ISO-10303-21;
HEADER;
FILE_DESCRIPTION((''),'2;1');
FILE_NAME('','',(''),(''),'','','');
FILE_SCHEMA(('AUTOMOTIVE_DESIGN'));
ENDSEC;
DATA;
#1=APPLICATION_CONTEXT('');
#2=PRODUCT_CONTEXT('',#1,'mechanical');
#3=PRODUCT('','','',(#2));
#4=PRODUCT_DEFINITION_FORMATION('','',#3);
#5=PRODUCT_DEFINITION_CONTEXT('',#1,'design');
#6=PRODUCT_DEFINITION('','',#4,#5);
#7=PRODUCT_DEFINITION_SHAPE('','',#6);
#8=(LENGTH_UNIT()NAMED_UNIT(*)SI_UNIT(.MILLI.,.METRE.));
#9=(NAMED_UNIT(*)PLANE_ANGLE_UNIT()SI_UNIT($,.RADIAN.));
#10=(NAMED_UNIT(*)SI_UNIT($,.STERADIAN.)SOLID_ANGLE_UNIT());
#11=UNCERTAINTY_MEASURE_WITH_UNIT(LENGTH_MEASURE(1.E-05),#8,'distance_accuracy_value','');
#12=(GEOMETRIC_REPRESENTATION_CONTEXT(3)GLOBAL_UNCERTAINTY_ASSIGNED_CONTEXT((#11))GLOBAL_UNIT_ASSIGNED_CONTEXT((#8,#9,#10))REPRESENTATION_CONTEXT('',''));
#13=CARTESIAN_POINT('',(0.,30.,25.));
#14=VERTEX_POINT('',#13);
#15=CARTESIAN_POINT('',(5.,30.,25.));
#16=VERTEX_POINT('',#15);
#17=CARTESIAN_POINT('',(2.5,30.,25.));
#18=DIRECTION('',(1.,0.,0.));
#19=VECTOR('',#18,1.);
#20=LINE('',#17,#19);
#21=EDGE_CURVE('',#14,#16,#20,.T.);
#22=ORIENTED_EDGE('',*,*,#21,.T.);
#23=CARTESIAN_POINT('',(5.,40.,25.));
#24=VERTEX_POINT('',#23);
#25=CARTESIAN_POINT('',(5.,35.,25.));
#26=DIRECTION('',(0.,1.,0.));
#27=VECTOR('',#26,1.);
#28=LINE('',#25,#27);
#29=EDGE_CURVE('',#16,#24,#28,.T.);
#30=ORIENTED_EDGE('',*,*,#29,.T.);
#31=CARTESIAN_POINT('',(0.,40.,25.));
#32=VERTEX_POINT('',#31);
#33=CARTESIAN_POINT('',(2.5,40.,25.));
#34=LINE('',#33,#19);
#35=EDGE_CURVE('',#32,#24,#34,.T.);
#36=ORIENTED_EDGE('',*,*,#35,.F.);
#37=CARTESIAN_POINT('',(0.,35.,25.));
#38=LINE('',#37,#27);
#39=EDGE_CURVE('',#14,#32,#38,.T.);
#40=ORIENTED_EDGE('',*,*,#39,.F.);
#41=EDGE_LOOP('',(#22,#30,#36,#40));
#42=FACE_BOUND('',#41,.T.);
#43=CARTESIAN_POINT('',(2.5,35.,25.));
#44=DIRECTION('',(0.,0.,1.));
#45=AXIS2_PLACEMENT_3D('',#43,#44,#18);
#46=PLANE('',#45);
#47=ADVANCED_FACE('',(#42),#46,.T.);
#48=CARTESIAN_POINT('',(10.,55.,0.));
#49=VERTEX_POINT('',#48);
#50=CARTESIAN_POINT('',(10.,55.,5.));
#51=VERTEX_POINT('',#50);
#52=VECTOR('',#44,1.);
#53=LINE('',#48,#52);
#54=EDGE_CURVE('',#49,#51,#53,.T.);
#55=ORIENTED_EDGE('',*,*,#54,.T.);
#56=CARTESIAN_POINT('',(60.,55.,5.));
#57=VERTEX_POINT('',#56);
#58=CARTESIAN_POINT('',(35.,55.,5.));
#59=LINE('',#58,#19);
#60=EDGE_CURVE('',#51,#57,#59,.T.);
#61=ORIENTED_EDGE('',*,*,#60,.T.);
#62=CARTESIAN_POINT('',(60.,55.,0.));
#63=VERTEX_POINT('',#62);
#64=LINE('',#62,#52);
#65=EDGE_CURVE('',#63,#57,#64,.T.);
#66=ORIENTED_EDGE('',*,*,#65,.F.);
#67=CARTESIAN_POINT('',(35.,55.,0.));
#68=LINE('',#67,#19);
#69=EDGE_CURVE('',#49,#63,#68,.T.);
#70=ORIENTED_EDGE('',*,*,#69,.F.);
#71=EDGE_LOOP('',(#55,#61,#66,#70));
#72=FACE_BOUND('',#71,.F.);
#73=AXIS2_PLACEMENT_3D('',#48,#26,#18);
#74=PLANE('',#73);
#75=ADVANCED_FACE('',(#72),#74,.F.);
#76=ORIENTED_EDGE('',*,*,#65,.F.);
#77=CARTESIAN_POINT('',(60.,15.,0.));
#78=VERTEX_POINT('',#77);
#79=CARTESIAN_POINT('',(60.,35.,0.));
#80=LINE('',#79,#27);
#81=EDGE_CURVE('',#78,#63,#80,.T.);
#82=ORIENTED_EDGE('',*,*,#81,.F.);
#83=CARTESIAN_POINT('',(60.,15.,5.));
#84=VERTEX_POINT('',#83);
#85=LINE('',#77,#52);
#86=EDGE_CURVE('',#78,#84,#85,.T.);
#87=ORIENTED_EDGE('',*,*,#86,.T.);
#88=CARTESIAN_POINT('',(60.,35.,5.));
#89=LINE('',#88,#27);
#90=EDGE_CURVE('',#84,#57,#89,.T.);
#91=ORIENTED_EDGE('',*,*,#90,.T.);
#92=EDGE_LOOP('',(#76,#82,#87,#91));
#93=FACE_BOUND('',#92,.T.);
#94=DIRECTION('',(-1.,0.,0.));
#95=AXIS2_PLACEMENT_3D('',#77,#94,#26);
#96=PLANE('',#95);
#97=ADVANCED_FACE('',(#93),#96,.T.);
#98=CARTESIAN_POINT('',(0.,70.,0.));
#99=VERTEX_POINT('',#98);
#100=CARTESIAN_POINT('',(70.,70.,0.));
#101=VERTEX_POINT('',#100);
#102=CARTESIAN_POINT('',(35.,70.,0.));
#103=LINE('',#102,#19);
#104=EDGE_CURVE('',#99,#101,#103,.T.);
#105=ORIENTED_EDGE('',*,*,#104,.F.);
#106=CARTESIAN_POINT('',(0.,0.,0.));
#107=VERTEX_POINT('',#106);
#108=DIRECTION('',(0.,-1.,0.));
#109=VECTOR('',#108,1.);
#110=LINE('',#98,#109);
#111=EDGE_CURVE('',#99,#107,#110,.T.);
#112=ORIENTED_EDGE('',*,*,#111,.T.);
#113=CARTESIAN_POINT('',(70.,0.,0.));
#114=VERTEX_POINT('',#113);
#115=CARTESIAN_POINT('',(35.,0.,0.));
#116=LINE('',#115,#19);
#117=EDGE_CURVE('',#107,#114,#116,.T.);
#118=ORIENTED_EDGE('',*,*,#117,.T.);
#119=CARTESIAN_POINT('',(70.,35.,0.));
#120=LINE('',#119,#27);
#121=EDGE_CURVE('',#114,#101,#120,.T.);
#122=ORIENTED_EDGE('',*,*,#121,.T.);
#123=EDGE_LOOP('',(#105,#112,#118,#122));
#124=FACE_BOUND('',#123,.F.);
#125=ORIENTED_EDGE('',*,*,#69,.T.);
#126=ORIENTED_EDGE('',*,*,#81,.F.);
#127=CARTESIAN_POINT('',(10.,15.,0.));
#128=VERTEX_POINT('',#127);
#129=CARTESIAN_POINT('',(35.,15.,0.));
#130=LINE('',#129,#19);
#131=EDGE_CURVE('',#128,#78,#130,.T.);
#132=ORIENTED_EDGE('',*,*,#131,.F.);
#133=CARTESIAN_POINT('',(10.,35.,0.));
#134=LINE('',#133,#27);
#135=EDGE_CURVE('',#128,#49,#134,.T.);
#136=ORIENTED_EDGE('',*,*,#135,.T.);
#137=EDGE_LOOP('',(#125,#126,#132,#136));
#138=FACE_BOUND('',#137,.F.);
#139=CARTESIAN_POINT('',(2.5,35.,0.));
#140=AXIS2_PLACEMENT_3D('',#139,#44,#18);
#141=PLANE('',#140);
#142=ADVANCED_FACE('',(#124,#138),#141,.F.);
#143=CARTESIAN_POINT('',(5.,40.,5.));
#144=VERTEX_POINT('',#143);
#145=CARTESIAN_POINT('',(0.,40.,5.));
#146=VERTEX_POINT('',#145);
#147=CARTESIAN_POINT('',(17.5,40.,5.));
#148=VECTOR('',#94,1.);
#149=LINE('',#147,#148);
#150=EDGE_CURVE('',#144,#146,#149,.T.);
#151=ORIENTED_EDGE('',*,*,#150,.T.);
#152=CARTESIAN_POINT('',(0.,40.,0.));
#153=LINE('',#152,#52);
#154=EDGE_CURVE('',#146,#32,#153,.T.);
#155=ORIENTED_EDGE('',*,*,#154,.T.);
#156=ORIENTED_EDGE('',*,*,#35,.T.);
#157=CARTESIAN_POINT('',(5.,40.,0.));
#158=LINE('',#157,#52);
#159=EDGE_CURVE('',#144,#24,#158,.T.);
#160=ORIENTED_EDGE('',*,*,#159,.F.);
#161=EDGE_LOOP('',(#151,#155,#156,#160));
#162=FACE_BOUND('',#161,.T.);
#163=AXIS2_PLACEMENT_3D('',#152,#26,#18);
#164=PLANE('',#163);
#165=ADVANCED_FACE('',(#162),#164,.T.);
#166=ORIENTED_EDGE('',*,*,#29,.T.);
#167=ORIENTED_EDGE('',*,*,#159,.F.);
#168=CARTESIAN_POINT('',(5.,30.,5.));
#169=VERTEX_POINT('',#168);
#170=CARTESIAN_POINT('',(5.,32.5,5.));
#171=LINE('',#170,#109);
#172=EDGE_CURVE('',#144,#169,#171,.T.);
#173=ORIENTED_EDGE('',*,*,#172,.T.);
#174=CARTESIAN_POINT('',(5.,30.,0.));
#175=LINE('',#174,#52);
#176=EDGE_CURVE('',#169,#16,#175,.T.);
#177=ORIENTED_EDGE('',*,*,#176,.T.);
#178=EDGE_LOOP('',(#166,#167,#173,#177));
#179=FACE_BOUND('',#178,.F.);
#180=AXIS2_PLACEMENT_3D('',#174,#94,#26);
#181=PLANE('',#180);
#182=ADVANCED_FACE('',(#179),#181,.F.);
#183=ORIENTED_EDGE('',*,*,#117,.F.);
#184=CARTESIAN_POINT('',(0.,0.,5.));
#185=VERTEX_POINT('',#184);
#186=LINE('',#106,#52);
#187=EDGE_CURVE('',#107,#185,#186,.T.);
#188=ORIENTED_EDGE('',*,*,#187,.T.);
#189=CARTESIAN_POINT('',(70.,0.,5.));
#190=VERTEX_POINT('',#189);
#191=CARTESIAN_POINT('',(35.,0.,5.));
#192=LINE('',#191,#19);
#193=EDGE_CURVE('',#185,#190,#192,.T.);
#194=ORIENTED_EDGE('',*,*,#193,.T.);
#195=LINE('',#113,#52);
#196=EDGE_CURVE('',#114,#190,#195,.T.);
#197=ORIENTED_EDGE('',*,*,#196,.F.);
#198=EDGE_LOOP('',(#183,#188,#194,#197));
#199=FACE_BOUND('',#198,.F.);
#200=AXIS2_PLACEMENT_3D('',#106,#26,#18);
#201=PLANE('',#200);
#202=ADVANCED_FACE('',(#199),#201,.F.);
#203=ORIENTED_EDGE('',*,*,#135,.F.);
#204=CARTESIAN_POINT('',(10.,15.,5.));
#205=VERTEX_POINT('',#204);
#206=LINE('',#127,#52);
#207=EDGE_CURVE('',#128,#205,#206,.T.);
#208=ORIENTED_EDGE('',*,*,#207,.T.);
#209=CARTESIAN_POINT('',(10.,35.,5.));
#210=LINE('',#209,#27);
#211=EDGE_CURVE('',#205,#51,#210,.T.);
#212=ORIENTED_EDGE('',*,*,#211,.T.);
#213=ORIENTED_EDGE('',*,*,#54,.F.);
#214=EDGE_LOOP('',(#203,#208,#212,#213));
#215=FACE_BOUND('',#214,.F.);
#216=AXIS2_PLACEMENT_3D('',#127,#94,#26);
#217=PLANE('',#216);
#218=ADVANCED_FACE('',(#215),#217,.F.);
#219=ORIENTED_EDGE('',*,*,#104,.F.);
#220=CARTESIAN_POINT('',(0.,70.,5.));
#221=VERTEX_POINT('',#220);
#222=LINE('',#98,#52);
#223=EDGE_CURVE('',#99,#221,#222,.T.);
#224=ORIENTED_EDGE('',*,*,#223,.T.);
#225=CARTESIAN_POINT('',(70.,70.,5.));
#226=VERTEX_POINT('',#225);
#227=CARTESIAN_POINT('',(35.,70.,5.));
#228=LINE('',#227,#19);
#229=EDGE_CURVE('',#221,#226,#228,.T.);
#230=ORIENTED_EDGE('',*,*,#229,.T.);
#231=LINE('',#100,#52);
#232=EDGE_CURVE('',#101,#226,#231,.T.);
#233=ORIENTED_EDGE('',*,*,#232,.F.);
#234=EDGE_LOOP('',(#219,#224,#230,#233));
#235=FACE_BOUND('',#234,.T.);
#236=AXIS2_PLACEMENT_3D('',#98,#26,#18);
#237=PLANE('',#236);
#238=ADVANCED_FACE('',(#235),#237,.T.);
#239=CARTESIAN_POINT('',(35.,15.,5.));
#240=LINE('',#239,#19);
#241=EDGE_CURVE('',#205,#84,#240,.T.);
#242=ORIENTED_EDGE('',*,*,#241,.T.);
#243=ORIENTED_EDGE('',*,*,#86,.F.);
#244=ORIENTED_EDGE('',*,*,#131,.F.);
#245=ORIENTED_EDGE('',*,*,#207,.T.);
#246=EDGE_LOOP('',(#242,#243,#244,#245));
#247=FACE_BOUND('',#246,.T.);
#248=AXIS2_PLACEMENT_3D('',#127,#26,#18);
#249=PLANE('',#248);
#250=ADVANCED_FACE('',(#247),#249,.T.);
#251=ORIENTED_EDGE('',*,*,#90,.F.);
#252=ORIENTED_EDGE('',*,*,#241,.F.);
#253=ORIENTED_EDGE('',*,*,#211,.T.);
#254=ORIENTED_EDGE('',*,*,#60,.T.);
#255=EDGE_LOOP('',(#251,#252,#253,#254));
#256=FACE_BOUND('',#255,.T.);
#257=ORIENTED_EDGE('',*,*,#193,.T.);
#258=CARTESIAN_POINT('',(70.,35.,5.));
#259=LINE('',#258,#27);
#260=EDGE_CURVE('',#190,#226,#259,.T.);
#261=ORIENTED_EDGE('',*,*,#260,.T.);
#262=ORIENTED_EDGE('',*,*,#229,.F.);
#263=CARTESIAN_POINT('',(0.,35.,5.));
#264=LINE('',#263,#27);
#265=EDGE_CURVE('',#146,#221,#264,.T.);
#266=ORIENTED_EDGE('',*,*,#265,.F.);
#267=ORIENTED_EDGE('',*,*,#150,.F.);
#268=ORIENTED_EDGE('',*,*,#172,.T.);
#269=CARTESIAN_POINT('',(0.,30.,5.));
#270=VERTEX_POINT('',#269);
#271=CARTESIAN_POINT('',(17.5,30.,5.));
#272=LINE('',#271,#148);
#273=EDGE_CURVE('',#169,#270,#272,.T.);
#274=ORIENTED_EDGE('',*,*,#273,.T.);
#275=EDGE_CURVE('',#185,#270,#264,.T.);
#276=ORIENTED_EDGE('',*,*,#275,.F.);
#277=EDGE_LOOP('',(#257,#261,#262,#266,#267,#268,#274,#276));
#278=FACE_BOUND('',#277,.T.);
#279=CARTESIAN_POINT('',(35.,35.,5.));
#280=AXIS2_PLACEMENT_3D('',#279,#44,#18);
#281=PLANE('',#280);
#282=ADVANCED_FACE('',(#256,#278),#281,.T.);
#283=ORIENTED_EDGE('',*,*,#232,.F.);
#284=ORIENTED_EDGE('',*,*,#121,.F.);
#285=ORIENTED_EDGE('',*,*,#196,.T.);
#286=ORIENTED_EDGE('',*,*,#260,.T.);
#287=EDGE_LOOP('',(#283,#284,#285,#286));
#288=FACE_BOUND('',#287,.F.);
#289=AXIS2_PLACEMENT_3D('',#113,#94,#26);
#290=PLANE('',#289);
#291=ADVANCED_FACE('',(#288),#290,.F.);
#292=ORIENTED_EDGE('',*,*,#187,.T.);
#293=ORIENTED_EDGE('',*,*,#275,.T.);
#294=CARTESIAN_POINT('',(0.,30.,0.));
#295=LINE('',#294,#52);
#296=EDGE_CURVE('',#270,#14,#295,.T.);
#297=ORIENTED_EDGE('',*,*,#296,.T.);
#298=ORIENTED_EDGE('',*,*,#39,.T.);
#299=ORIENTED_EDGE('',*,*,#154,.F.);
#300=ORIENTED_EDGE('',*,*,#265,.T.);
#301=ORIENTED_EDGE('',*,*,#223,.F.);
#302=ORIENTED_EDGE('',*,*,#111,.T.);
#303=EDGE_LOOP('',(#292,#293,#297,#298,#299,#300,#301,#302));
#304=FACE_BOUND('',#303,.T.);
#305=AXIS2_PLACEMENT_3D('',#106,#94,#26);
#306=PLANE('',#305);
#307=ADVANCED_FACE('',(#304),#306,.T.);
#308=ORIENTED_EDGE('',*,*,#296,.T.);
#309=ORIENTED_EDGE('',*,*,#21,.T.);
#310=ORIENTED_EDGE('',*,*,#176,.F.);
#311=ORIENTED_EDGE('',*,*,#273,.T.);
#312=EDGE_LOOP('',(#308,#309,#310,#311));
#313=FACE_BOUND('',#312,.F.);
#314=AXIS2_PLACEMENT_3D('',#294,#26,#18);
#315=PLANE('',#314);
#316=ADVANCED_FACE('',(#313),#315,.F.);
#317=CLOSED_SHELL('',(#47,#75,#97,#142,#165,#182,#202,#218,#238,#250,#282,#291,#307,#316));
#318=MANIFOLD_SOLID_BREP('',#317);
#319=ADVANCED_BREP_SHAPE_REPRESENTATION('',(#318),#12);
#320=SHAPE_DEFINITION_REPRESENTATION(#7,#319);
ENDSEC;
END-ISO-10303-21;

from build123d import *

# Parameters (mm, degrees)
F0_W     = 70
F0_H     = 70
F0_W_2   = 50
F0_H_2   = 40
F1_DEPTH = 5
F2_W     = 5
F2_H     = 10
F3_DEPTH = 25


# Not quite as in the source:
# - a feature names something its author has since deleted; it is built from what else it names


with BuildPart() as f1:
    # F0 (on Top) → F1 (new body)
    with BuildSketch(Plane.XY):
        with Locations((35, 35)):
            Rectangle(F0_W, F0_H)
        with Locations((35, 35)):
            Rectangle(F0_W_2, F0_H_2, mode=Mode.SUBTRACT)
    extrude(amount=F1_DEPTH)

    # F2 (on Top) → F3 (join)
    with BuildSketch(Plane.XY):
        with Locations((2.5, 35)):
            Rectangle(F2_W, F2_H)
    extrude(amount=F3_DEPTH)


solid = f1.part
